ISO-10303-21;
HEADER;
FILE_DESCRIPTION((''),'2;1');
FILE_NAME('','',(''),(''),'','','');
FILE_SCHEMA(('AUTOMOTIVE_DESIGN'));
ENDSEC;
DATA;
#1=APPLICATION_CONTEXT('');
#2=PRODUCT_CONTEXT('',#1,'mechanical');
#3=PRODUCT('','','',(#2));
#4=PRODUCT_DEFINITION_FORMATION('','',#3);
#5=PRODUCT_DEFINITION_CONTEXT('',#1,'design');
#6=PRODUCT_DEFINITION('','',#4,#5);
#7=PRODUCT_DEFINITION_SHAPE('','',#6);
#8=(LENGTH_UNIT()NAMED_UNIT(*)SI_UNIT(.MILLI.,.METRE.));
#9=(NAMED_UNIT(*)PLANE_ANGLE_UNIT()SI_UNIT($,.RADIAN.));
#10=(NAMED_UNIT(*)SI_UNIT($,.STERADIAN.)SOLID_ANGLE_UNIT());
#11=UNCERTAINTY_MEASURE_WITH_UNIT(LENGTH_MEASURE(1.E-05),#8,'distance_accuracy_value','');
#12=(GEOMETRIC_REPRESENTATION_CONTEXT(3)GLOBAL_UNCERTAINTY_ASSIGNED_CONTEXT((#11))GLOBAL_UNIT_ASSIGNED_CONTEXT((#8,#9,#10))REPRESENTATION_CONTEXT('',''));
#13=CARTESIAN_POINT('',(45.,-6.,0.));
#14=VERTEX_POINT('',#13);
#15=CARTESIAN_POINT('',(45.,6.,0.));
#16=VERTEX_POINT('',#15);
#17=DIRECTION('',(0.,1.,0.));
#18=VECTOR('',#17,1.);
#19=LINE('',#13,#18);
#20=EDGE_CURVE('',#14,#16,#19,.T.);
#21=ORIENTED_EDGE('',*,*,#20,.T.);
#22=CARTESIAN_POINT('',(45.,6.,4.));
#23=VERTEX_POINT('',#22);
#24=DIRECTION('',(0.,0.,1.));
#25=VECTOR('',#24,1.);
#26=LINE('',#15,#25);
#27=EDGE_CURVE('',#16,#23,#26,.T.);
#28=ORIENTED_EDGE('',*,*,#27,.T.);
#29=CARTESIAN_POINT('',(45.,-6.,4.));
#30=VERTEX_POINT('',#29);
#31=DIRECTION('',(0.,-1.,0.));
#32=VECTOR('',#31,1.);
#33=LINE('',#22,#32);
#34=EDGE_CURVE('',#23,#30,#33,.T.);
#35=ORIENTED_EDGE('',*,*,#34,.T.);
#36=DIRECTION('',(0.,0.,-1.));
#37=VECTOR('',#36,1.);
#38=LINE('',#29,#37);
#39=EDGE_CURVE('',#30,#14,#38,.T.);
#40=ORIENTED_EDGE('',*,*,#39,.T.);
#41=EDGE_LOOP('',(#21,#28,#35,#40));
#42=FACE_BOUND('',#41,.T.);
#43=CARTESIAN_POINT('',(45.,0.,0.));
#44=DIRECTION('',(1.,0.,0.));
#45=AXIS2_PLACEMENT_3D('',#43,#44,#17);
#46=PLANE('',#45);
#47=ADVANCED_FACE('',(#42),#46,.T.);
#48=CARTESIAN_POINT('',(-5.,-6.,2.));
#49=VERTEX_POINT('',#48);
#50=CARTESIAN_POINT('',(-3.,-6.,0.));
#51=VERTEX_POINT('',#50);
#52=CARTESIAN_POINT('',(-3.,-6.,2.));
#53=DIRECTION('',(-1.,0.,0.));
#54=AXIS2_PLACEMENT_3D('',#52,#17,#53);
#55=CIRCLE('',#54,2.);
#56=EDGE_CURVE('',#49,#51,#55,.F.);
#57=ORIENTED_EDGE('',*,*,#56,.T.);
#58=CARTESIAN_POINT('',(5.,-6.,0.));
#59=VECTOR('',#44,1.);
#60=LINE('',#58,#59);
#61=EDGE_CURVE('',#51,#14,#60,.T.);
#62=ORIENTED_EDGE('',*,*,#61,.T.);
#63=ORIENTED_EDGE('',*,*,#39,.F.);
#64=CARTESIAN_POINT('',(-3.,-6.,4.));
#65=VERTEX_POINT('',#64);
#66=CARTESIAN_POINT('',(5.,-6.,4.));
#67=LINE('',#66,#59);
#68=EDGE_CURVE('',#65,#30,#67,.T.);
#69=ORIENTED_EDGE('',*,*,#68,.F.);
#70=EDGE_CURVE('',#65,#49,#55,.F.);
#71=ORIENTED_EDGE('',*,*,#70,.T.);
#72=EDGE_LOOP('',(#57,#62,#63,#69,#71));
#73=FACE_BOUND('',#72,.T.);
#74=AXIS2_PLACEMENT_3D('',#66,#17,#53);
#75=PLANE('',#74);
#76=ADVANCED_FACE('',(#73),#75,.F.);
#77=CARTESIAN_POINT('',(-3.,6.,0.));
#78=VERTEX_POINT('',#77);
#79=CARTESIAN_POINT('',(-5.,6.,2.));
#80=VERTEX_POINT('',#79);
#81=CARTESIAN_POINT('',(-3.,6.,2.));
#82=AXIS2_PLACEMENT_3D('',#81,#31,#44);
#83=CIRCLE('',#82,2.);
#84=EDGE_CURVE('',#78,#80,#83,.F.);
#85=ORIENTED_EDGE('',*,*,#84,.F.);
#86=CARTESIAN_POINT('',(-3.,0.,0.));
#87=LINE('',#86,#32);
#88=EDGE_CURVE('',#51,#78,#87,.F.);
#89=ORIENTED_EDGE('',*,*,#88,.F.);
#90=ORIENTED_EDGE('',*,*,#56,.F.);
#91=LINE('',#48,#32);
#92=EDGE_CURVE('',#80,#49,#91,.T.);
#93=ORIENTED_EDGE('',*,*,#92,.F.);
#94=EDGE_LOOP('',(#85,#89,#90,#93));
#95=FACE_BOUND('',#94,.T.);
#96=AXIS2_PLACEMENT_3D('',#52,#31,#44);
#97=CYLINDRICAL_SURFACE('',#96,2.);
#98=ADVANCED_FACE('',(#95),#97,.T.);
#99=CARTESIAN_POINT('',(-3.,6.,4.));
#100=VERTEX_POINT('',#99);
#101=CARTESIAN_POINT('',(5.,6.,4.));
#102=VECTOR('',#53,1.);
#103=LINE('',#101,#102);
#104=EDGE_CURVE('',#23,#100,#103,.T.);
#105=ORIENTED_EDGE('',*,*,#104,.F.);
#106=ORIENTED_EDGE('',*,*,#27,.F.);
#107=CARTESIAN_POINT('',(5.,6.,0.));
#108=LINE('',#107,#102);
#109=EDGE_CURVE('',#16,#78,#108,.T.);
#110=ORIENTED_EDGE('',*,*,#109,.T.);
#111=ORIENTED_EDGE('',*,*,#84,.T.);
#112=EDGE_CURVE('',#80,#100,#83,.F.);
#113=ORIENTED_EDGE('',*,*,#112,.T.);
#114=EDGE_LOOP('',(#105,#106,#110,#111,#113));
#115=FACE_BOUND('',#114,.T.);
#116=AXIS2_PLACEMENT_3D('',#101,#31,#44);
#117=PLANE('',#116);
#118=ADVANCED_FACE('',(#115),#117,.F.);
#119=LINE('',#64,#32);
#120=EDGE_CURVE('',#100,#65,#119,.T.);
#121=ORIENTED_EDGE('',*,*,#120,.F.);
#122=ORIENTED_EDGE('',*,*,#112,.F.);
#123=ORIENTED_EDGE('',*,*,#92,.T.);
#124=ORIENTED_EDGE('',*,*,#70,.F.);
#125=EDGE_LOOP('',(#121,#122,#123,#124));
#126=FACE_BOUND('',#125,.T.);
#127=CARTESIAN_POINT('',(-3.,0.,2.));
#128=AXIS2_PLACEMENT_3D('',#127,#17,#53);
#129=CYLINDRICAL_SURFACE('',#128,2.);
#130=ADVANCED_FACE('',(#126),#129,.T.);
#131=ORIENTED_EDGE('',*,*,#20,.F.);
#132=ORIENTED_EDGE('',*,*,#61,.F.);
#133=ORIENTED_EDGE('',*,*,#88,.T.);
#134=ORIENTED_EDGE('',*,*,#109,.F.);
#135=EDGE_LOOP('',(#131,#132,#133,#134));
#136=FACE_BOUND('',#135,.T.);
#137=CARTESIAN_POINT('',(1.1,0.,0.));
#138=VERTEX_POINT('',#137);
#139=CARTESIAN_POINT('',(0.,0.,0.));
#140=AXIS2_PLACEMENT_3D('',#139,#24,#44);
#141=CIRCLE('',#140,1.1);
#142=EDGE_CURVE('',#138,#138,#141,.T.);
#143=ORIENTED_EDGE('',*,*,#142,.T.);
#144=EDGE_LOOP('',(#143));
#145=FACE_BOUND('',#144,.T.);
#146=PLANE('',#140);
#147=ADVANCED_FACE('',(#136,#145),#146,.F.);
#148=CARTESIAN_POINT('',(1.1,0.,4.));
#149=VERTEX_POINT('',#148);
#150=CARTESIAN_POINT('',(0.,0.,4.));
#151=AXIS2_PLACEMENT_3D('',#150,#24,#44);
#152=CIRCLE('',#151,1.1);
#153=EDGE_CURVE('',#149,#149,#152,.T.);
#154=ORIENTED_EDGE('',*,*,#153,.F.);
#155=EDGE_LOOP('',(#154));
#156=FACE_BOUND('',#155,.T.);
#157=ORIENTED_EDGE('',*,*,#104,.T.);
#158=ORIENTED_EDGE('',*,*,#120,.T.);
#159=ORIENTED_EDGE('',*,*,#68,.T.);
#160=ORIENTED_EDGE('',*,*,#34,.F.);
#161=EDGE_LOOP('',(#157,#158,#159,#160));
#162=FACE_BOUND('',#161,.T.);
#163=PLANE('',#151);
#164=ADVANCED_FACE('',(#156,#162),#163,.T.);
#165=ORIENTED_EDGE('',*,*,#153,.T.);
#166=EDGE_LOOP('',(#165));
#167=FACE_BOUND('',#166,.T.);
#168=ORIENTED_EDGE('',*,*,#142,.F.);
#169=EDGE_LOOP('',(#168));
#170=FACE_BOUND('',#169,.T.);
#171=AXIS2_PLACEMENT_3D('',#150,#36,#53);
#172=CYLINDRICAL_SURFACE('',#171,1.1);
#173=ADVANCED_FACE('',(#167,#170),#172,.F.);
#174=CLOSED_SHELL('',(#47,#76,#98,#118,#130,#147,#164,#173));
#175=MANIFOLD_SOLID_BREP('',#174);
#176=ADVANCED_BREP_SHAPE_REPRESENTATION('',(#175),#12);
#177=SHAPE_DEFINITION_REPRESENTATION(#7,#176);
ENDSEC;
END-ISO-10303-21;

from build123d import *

# Parameters (mm, degrees)
SKETCH1_W           = 10
SKETCH1_H           = 12
SKETCH1_R           = 1.1
BOSS_EXTRUDE1_DEPTH = 4
FILLET1_R           = 2
SKETCH2_W           = 4
SKETCH2_H           = 12
BOSS_EXTRUDE2_DEPTH = 40


with BuildPart() as part:
    # Sketch1 → Boss-Extrude1 (new body)
    with BuildSketch(Plane.XY):
        Rectangle(SKETCH1_W, SKETCH1_H)
        Circle(SKETCH1_R, mode=Mode.SUBTRACT)
    extrude(amount=BOSS_EXTRUDE1_DEPTH)

    # Fillet1
    fillet1_edges = [part.edges().sort_by_distance(p)[0] for p in [
        (-5, 0, 4),
        (-5, 0, 0),
    ]]
    fillet(fillet1_edges, radius=FILLET1_R - 0.0001)  # a hair under: the kernel refuses the full size

    # Sketch2 → Boss-Extrude2 (add)
    with BuildSketch(Plane(origin=(5, 0, 0), x_dir=(0, 0, -1), z_dir=(1, 0, 0))):
        with Locations((-2, 0)):
            Rectangle(SKETCH2_W, SKETCH2_H)
    extrude(amount=BOSS_EXTRUDE2_DEPTH)


solid = part.part
